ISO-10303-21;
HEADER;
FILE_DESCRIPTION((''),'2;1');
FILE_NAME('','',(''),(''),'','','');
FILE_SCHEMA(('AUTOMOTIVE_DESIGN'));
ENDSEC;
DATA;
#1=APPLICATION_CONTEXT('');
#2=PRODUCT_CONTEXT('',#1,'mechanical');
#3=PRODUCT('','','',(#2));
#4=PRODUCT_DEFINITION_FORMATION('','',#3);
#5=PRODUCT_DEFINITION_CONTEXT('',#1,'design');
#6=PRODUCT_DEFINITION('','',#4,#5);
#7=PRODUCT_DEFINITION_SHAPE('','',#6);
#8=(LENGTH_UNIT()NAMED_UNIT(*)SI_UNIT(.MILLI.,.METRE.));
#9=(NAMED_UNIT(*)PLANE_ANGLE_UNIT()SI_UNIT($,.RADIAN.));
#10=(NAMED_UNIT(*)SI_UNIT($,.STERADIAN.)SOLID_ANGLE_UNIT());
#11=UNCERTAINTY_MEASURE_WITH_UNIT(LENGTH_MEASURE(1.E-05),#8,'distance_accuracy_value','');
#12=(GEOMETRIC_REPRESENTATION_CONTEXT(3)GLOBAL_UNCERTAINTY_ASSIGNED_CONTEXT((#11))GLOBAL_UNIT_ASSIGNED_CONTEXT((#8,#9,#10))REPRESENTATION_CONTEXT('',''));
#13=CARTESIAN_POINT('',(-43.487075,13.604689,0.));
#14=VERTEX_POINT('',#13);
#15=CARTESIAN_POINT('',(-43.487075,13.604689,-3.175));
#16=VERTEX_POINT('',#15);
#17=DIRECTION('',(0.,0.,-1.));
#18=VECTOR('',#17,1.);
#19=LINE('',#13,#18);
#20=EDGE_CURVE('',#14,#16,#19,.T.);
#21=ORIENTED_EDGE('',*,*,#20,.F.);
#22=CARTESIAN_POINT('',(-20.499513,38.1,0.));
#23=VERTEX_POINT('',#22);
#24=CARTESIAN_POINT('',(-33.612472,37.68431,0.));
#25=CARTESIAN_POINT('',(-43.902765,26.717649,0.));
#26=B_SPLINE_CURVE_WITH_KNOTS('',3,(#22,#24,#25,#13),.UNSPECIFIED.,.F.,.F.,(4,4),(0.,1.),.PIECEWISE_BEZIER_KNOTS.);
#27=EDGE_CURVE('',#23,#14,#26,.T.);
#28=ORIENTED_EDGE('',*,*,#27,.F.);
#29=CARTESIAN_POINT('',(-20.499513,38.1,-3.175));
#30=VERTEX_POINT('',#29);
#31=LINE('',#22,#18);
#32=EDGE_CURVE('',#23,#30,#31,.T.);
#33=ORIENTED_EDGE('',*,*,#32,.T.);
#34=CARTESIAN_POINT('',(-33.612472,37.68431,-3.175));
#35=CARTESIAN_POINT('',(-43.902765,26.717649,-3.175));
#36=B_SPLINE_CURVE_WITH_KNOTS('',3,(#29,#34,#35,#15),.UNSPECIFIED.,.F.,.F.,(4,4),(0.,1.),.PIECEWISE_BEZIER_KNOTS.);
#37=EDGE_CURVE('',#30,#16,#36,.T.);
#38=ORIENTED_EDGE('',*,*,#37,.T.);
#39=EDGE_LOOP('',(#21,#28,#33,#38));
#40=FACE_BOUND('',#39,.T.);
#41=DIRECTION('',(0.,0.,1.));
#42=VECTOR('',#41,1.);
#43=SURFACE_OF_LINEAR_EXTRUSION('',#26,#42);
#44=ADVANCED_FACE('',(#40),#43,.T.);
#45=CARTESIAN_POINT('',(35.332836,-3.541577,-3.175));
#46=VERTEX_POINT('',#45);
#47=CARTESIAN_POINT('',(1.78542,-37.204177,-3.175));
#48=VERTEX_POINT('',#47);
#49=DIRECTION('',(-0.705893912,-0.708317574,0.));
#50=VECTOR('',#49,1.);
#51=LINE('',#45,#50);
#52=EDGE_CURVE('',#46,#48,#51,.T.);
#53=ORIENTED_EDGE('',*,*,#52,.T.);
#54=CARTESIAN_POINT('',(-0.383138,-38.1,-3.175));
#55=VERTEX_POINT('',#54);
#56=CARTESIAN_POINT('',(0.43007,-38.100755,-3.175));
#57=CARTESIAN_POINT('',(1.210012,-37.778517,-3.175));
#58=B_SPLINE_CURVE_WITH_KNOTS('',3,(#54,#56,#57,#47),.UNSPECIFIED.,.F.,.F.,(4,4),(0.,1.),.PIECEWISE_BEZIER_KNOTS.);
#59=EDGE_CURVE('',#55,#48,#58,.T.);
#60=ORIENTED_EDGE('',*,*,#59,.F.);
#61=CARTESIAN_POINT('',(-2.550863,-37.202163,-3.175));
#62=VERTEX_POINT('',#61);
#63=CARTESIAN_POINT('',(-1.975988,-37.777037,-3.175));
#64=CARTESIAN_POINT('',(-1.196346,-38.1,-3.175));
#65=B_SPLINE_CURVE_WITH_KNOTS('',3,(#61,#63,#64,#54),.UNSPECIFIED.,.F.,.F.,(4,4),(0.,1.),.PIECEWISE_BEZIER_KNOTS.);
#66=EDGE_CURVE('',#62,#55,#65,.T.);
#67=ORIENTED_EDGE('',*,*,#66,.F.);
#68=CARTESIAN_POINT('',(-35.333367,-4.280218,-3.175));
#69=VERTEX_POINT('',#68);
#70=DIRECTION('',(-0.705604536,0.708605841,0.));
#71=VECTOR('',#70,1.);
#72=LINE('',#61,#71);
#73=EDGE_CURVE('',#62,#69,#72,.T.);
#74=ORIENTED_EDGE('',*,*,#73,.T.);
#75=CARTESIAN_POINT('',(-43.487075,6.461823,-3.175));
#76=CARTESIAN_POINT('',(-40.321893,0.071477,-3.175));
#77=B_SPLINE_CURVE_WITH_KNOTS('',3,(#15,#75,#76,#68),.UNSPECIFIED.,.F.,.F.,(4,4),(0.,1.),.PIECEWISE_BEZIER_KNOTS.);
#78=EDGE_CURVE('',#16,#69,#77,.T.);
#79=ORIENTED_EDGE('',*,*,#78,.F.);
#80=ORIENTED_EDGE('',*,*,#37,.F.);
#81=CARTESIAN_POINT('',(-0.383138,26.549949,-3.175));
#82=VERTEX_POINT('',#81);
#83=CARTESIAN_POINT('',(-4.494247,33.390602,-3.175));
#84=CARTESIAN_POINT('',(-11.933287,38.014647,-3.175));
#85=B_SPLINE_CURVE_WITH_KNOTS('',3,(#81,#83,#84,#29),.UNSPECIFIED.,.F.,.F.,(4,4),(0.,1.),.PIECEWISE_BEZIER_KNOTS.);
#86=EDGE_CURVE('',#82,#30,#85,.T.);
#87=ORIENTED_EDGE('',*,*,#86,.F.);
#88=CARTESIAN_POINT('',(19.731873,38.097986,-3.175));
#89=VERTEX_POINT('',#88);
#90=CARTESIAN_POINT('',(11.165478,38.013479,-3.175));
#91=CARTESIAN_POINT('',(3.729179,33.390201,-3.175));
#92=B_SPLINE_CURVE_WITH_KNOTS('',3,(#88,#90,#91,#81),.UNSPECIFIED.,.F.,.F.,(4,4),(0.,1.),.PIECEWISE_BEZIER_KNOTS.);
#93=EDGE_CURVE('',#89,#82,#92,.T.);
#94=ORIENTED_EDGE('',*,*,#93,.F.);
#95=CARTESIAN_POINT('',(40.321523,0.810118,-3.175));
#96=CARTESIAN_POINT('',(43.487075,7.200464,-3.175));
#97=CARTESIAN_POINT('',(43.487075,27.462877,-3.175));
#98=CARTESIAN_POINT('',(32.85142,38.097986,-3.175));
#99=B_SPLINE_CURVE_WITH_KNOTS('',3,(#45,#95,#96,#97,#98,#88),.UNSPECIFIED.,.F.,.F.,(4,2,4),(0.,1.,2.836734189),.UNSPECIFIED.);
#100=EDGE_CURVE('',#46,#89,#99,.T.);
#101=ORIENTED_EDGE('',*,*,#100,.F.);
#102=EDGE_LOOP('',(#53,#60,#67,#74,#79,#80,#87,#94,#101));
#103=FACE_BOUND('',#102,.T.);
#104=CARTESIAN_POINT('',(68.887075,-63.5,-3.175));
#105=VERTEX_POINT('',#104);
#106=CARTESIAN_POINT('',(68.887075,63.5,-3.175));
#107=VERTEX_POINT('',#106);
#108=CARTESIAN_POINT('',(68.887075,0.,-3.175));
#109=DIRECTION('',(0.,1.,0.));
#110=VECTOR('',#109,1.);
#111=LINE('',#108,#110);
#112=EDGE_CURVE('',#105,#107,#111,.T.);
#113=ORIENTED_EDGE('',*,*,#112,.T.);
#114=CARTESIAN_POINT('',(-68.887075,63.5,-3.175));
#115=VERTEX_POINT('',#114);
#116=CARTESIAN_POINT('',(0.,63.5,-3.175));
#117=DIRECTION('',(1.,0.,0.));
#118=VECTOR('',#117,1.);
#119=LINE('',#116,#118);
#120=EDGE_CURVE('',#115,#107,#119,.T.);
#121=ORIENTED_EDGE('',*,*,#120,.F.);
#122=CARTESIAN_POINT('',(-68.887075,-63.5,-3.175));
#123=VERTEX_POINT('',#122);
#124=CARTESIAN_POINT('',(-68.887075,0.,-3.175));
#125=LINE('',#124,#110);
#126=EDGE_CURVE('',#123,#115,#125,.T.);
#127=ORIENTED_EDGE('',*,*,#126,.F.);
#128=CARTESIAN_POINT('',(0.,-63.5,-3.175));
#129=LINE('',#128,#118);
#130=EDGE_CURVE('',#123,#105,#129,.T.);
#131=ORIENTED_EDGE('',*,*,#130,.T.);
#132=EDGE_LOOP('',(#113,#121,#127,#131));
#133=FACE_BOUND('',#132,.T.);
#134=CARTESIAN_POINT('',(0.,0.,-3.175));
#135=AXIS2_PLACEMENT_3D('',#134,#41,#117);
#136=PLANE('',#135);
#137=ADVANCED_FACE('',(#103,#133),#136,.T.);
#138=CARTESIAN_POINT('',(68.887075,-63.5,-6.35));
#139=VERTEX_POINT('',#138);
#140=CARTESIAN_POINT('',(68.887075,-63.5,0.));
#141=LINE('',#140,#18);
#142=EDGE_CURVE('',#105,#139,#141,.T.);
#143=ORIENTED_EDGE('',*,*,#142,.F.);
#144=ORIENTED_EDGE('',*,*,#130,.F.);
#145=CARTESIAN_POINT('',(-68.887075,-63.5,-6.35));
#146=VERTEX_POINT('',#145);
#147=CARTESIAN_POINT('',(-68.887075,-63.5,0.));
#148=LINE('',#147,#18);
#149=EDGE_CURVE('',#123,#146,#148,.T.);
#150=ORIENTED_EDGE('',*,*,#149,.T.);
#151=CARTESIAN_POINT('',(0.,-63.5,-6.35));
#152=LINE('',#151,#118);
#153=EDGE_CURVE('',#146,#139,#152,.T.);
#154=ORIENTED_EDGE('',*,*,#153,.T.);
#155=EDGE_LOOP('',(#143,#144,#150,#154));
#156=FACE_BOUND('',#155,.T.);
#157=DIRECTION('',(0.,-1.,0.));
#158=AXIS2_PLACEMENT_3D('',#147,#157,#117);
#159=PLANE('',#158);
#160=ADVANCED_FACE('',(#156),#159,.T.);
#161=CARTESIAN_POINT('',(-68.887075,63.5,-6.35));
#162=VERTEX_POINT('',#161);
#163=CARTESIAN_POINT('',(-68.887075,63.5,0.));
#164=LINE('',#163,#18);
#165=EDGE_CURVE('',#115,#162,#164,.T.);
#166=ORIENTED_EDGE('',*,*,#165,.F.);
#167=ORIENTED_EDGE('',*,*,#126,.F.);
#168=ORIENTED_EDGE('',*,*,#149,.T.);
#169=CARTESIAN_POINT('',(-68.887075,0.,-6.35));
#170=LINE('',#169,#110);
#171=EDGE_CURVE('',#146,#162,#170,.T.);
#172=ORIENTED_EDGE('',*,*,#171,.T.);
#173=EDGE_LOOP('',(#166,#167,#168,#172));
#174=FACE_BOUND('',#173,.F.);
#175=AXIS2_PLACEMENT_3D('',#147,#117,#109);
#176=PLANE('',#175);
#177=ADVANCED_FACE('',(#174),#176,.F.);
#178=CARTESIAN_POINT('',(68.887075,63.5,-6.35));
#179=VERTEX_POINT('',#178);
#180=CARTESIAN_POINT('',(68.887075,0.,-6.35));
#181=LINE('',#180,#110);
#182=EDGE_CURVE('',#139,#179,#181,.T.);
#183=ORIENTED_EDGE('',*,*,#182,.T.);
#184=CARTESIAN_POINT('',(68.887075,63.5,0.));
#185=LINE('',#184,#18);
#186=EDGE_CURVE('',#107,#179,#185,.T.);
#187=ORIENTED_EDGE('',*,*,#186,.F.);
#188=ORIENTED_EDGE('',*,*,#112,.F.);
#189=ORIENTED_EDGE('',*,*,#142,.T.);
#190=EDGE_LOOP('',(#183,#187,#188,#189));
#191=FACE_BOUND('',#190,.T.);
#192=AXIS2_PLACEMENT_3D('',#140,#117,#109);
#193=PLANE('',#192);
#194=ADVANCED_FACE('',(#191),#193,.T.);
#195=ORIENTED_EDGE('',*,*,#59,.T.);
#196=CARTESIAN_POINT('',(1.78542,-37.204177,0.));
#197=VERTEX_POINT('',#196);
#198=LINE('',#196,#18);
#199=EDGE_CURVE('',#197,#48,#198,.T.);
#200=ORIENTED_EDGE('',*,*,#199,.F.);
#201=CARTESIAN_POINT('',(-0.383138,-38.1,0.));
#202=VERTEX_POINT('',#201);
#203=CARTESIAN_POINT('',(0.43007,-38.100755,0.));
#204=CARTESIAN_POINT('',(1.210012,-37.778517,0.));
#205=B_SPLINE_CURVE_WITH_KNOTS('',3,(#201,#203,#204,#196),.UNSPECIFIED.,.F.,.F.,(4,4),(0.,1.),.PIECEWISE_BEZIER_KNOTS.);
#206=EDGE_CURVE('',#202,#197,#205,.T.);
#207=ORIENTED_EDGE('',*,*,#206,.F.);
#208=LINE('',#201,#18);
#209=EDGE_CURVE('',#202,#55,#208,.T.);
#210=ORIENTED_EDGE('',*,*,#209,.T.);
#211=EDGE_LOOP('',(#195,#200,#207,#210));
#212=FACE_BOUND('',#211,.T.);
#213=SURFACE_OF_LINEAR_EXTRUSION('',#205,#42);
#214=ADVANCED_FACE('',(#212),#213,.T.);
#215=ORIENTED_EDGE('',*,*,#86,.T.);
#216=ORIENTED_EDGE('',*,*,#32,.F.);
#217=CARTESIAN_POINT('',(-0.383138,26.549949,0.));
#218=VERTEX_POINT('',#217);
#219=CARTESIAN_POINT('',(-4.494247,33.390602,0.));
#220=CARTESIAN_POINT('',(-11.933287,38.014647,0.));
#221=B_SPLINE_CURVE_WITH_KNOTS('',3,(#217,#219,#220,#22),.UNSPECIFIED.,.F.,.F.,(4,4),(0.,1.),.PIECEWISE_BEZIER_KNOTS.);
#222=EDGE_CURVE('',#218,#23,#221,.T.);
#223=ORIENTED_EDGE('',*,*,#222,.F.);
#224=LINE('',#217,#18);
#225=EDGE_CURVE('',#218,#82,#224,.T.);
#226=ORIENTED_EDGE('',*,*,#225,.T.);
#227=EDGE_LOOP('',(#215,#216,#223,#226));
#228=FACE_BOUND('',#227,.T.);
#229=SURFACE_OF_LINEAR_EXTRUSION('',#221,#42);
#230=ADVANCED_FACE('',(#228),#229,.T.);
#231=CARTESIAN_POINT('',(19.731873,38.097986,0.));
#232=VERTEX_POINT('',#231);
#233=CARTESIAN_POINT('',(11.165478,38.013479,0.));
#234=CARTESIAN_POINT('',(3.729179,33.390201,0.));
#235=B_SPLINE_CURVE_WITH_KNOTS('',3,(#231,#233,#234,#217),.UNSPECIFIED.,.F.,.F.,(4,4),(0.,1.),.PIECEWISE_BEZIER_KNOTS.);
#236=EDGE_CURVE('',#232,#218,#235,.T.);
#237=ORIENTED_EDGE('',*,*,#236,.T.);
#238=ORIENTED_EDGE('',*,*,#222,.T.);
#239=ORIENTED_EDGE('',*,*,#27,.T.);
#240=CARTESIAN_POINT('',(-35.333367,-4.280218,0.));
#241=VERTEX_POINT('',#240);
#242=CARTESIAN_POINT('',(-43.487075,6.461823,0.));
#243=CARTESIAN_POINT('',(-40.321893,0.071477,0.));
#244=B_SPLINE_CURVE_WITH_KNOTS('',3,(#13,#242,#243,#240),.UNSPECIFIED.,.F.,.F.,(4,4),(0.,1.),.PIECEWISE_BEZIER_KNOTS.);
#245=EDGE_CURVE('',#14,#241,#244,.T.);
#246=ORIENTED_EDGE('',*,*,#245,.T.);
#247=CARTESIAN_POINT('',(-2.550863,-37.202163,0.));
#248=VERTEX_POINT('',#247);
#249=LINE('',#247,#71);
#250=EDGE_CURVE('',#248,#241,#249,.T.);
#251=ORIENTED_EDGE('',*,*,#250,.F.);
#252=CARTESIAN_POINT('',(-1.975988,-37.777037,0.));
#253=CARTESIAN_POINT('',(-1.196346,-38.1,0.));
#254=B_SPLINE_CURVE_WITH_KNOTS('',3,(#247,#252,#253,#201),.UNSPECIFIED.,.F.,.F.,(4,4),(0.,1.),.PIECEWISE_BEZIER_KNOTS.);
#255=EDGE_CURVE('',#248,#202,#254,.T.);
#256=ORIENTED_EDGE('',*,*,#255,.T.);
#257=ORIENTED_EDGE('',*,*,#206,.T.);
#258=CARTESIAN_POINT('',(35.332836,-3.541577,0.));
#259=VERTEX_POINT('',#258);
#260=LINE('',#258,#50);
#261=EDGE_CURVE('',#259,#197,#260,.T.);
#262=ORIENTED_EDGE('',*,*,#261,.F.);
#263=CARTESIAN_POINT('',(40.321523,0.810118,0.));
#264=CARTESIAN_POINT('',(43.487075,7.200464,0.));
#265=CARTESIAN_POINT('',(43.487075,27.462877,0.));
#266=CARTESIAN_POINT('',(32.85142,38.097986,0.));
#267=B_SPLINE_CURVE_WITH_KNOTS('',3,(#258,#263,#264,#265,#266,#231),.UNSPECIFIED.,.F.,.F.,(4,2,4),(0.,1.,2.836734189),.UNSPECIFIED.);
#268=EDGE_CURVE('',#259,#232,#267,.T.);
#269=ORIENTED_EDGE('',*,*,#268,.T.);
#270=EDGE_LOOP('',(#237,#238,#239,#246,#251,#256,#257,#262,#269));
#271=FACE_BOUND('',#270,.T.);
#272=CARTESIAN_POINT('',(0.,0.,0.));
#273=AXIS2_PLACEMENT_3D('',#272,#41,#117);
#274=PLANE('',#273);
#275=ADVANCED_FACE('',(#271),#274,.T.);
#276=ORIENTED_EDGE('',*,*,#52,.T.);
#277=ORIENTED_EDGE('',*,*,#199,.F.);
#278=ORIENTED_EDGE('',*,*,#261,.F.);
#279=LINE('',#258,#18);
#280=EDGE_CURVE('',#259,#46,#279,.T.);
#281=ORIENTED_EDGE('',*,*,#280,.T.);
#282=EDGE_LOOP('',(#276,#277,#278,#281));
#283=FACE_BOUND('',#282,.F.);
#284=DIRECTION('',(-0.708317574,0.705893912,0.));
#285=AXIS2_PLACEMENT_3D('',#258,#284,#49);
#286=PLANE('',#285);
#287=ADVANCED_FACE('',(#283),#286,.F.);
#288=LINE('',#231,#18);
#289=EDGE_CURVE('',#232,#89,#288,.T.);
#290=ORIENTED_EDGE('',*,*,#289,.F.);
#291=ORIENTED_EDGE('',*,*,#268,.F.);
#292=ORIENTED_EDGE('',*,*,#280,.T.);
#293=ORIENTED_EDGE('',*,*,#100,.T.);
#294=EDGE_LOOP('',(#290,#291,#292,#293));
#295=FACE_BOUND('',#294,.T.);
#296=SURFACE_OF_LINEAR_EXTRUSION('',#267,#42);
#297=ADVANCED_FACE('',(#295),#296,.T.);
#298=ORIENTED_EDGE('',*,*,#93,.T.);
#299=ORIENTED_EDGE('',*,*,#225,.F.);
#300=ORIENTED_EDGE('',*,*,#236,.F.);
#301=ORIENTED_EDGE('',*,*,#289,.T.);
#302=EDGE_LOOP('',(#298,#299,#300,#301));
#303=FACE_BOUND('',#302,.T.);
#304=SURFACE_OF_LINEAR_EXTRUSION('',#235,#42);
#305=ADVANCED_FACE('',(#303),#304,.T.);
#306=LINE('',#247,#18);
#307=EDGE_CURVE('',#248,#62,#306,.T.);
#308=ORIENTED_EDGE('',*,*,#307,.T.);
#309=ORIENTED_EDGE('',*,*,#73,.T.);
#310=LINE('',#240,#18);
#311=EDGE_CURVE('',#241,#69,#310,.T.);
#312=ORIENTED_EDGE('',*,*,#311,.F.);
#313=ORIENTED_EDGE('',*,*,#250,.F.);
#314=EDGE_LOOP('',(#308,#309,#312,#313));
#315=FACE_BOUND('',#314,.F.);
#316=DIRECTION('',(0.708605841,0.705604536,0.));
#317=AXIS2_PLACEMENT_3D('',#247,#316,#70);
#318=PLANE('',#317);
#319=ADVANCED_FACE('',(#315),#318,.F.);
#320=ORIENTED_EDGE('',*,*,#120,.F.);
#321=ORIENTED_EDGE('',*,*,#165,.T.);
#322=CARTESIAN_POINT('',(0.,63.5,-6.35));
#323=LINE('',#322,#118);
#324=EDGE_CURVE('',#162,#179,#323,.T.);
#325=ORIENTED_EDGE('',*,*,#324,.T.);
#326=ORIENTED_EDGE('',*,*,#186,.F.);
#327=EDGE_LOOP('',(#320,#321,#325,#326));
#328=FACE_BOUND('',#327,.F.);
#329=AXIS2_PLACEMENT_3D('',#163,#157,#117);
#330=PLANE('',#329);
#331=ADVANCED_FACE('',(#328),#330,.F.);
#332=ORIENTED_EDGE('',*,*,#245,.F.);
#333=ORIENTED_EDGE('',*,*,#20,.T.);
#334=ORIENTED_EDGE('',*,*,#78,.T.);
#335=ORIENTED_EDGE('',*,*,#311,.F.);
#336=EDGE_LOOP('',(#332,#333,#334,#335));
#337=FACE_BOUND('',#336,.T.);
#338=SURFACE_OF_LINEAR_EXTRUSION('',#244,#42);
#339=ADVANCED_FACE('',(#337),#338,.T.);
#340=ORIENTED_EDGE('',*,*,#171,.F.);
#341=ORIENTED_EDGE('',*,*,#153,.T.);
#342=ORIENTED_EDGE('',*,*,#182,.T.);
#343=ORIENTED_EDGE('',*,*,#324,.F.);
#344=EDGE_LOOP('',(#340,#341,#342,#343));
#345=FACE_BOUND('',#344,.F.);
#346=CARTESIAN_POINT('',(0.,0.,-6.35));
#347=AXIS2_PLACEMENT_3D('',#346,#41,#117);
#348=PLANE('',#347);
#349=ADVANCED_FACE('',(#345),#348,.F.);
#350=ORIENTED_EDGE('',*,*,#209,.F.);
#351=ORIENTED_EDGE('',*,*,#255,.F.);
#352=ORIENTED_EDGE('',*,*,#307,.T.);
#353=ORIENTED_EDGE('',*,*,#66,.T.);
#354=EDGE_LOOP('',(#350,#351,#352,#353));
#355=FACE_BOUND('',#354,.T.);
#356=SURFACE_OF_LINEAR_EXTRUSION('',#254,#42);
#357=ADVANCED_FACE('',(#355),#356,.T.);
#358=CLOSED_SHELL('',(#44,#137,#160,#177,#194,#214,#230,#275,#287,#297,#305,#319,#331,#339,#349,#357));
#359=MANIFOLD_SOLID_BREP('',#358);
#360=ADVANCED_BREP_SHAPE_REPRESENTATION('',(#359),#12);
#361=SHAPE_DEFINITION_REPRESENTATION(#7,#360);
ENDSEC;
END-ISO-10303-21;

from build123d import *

# Parameters (mm, degrees)
F0_W      = 137.7741502185
F0_H      = 127
F1_DEPTH  = 6.35
F1_FACE_W = 137.7741502185
F1_FACE_H = 127
F2_DEPTH  = 3.175


# Not quite as in the source:
# - a length typed as a fraction of an inch, garbled in the dataset ("3 / 203.2 mm" for 3/8 in), is restored


with BuildPart() as f1:
    # F0 (on Top) → F1 (new body)
    with BuildSketch(Plane.XY):
        Rectangle(F0_W, F0_H)
        with BuildLine():
            add(Edge.make_bspline(
                [(43.4870751092, 14.3433300558), (43.4870751092, 27.462876741), (32.8514196183, 38.0979859262), (19.7318729331, 38.0979859262)],
                knots=[0, 0, 0, 0, 1, 1, 1, 1], degree=3))
            add(Edge.make_bspline(
                [(35.3328363694, -3.5415767003), (40.3215229837, 0.8101175052), (43.4870751092, 7.2004637855), (43.4870751092, 14.3433300558)],
                knots=[0, 0, 0, 0, 1, 1, 1, 1], degree=3))
            Line((35.3328363694, -3.5415767003), (1.7854201908, -37.2041767762))
            add(Edge.make_bspline(
                [(-0.3831377338, -38.1), (0.4300700378, -38.1007554216), (1.2100121742, -37.7785167454), (1.7854201908, -37.2041767762)],
                knots=[0, 0, 0, 0, 1, 1, 1, 1], degree=3))
            add(Edge.make_bspline(
                [(-2.5508625567, -37.2021627024), (-1.9759883158, -37.7770369433), (-1.1963458563, -38.1), (-0.3831377338, -38.1)],
                knots=[0, 0, 0, 0, 1, 1, 1, 1], degree=3))
            Line((-2.5508625567, -37.2021627024), (-35.3333666072, -4.280217526))
            add(Edge.make_bspline(
                [(-43.4870751092, 13.6046892301), (-43.4870751092, 6.4618229599), (-40.3218925434, 0.0714766795), (-35.3333666072, -4.280217526)],
                knots=[0, 0, 0, 0, 1, 1, 1, 1], degree=3))
            add(Edge.make_bspline(
                [(-20.4995127814, 38.1), (-33.6124722867, 37.6843099249), (-43.9027651844, 26.7176487354), (-43.4870751092, 13.6046892301)],
                knots=[0, 0, 0, 0, 1, 1, 1, 1], degree=3))
            add(Edge.make_bspline(
                [(-0.3831377338, 26.5499493108), (-4.4942474015, 33.3906018689), (-11.9332866772, 38.0146472183), (-20.4995127814, 38.1)],
                knots=[0, 0, 0, 0, 1, 1, 1, 1], degree=3))
            add(Edge.make_bspline(
                [(19.7318729331, 38.0979859262), (11.16547776, 38.0134786667), (3.7291785921, 33.3902005219), (-0.3831377338, 26.5499493108)],
                knots=[0, 0, 0, 0, 1, 1, 1, 1], degree=3))
        make_face(mode=Mode.SUBTRACT)
        with BuildLine():
            add(Edge.make_bspline(
                [(35.3328363694, -3.5415767003), (40.3215229837, 0.8101175052), (43.4870751092, 7.2004637855), (43.4870751092, 14.3433300558)],
                knots=[0, 0, 0, 0, 1, 1, 1, 1], degree=3))
            add(Edge.make_bspline(
                [(43.4870751092, 14.3433300558), (43.4870751092, 27.462876741), (32.8514196183, 38.0979859262), (19.7318729331, 38.0979859262)],
                knots=[0, 0, 0, 0, 1, 1, 1, 1], degree=3))
            add(Edge.make_bspline(
                [(19.7318729331, 38.0979859262), (11.16547776, 38.0134786667), (3.7291785921, 33.3902005219), (-0.3831377338, 26.5499493108)],
                knots=[0, 0, 0, 0, 1, 1, 1, 1], degree=3))
            add(Edge.make_bspline(
                [(-0.3831377338, 26.5499493108), (-4.4942474015, 33.3906018689), (-11.9332866772, 38.0146472183), (-20.4995127814, 38.1)],
                knots=[0, 0, 0, 0, 1, 1, 1, 1], degree=3))
            add(Edge.make_bspline(
                [(-20.4995127814, 38.1), (-33.6124722867, 37.6843099249), (-43.9027651844, 26.7176487354), (-43.4870751092, 13.6046892301)],
                knots=[0, 0, 0, 0, 1, 1, 1, 1], degree=3))
            add(Edge.make_bspline(
                [(-43.4870751092, 13.6046892301), (-43.4870751092, 6.4618229599), (-40.3218925434, 0.0714766795), (-35.3333666072, -4.280217526)],
                knots=[0, 0, 0, 0, 1, 1, 1, 1], degree=3))
            Line((-35.3333666072, -4.280217526), (-2.5508625567, -37.2021627024))
            add(Edge.make_bspline(
                [(-2.5508625567, -37.2021627024), (-1.9759883158, -37.7770369433), (-1.1963458563, -38.1), (-0.3831377338, -38.1)],
                knots=[0, 0, 0, 0, 1, 1, 1, 1], degree=3))
            add(Edge.make_bspline(
                [(-0.3831377338, -38.1), (0.4300700378, -38.1007554216), (1.2100121742, -37.7785167454), (1.7854201908, -37.2041767762)],
                knots=[0, 0, 0, 0, 1, 1, 1, 1], degree=3))
            Line((1.7854201908, -37.2041767762), (35.3328363694, -3.5415767003))
        make_face()
    extrude(amount=-F1_DEPTH)

    # F0 (on Top) + F1_face (on face) → F2 (cut)
    with BuildSketch(Plane.XY):
        Rectangle(F0_W, F0_H)
        with BuildLine():
            add(Edge.make_bspline(
                [(43.4870751092, 14.3433300558), (43.4870751092, 27.462876741), (32.8514196183, 38.0979859262), (19.7318729331, 38.0979859262)],
                knots=[0, 0, 0, 0, 1, 1, 1, 1], degree=3))
            add(Edge.make_bspline(
                [(35.3328363694, -3.5415767003), (40.3215229837, 0.8101175052), (43.4870751092, 7.2004637855), (43.4870751092, 14.3433300558)],
                knots=[0, 0, 0, 0, 1, 1, 1, 1], degree=3))
            Line((35.3328363694, -3.5415767003), (1.7854201908, -37.2041767762))
            add(Edge.make_bspline(
                [(-0.3831377338, -38.1), (0.4300700378, -38.1007554216), (1.2100121742, -37.7785167454), (1.7854201908, -37.2041767762)],
                knots=[0, 0, 0, 0, 1, 1, 1, 1], degree=3))
            add(Edge.make_bspline(
                [(-2.5508625567, -37.2021627024), (-1.9759883158, -37.7770369433), (-1.1963458563, -38.1), (-0.3831377338, -38.1)],
                knots=[0, 0, 0, 0, 1, 1, 1, 1], degree=3))
            Line((-2.5508625567, -37.2021627024), (-35.3333666072, -4.280217526))
            add(Edge.make_bspline(
                [(-43.4870751092, 13.6046892301), (-43.4870751092, 6.4618229599), (-40.3218925434, 0.0714766795), (-35.3333666072, -4.280217526)],
                knots=[0, 0, 0, 0, 1, 1, 1, 1], degree=3))
            add(Edge.make_bspline(
                [(-20.4995127814, 38.1), (-33.6124722867, 37.6843099249), (-43.9027651844, 26.7176487354), (-43.4870751092, 13.6046892301)],
                knots=[0, 0, 0, 0, 1, 1, 1, 1], degree=3))
            add(Edge.make_bspline(
                [(-0.3831377338, 26.5499493108), (-4.4942474015, 33.3906018689), (-11.9332866772, 38.0146472183), (-20.4995127814, 38.1)],
                knots=[0, 0, 0, 0, 1, 1, 1, 1], degree=3))
            add(Edge.make_bspline(
                [(19.7318729331, 38.0979859262), (11.16547776, 38.0134786667), (3.7291785921, 33.3902005219), (-0.3831377338, 26.5499493108)],
                knots=[0, 0, 0, 0, 1, 1, 1, 1], degree=3))
        make_face(mode=Mode.SUBTRACT)
    with BuildSketch(Plane(origin=(0, 0, -6.35), x_dir=(1, 0, 0), z_dir=(0, 0, -1))):
        Rectangle(F1_FACE_W, F1_FACE_H)
    extrude(amount=-F2_DEPTH, dir=(0, 0, 1), mode=Mode.SUBTRACT)


solid = f1.part
